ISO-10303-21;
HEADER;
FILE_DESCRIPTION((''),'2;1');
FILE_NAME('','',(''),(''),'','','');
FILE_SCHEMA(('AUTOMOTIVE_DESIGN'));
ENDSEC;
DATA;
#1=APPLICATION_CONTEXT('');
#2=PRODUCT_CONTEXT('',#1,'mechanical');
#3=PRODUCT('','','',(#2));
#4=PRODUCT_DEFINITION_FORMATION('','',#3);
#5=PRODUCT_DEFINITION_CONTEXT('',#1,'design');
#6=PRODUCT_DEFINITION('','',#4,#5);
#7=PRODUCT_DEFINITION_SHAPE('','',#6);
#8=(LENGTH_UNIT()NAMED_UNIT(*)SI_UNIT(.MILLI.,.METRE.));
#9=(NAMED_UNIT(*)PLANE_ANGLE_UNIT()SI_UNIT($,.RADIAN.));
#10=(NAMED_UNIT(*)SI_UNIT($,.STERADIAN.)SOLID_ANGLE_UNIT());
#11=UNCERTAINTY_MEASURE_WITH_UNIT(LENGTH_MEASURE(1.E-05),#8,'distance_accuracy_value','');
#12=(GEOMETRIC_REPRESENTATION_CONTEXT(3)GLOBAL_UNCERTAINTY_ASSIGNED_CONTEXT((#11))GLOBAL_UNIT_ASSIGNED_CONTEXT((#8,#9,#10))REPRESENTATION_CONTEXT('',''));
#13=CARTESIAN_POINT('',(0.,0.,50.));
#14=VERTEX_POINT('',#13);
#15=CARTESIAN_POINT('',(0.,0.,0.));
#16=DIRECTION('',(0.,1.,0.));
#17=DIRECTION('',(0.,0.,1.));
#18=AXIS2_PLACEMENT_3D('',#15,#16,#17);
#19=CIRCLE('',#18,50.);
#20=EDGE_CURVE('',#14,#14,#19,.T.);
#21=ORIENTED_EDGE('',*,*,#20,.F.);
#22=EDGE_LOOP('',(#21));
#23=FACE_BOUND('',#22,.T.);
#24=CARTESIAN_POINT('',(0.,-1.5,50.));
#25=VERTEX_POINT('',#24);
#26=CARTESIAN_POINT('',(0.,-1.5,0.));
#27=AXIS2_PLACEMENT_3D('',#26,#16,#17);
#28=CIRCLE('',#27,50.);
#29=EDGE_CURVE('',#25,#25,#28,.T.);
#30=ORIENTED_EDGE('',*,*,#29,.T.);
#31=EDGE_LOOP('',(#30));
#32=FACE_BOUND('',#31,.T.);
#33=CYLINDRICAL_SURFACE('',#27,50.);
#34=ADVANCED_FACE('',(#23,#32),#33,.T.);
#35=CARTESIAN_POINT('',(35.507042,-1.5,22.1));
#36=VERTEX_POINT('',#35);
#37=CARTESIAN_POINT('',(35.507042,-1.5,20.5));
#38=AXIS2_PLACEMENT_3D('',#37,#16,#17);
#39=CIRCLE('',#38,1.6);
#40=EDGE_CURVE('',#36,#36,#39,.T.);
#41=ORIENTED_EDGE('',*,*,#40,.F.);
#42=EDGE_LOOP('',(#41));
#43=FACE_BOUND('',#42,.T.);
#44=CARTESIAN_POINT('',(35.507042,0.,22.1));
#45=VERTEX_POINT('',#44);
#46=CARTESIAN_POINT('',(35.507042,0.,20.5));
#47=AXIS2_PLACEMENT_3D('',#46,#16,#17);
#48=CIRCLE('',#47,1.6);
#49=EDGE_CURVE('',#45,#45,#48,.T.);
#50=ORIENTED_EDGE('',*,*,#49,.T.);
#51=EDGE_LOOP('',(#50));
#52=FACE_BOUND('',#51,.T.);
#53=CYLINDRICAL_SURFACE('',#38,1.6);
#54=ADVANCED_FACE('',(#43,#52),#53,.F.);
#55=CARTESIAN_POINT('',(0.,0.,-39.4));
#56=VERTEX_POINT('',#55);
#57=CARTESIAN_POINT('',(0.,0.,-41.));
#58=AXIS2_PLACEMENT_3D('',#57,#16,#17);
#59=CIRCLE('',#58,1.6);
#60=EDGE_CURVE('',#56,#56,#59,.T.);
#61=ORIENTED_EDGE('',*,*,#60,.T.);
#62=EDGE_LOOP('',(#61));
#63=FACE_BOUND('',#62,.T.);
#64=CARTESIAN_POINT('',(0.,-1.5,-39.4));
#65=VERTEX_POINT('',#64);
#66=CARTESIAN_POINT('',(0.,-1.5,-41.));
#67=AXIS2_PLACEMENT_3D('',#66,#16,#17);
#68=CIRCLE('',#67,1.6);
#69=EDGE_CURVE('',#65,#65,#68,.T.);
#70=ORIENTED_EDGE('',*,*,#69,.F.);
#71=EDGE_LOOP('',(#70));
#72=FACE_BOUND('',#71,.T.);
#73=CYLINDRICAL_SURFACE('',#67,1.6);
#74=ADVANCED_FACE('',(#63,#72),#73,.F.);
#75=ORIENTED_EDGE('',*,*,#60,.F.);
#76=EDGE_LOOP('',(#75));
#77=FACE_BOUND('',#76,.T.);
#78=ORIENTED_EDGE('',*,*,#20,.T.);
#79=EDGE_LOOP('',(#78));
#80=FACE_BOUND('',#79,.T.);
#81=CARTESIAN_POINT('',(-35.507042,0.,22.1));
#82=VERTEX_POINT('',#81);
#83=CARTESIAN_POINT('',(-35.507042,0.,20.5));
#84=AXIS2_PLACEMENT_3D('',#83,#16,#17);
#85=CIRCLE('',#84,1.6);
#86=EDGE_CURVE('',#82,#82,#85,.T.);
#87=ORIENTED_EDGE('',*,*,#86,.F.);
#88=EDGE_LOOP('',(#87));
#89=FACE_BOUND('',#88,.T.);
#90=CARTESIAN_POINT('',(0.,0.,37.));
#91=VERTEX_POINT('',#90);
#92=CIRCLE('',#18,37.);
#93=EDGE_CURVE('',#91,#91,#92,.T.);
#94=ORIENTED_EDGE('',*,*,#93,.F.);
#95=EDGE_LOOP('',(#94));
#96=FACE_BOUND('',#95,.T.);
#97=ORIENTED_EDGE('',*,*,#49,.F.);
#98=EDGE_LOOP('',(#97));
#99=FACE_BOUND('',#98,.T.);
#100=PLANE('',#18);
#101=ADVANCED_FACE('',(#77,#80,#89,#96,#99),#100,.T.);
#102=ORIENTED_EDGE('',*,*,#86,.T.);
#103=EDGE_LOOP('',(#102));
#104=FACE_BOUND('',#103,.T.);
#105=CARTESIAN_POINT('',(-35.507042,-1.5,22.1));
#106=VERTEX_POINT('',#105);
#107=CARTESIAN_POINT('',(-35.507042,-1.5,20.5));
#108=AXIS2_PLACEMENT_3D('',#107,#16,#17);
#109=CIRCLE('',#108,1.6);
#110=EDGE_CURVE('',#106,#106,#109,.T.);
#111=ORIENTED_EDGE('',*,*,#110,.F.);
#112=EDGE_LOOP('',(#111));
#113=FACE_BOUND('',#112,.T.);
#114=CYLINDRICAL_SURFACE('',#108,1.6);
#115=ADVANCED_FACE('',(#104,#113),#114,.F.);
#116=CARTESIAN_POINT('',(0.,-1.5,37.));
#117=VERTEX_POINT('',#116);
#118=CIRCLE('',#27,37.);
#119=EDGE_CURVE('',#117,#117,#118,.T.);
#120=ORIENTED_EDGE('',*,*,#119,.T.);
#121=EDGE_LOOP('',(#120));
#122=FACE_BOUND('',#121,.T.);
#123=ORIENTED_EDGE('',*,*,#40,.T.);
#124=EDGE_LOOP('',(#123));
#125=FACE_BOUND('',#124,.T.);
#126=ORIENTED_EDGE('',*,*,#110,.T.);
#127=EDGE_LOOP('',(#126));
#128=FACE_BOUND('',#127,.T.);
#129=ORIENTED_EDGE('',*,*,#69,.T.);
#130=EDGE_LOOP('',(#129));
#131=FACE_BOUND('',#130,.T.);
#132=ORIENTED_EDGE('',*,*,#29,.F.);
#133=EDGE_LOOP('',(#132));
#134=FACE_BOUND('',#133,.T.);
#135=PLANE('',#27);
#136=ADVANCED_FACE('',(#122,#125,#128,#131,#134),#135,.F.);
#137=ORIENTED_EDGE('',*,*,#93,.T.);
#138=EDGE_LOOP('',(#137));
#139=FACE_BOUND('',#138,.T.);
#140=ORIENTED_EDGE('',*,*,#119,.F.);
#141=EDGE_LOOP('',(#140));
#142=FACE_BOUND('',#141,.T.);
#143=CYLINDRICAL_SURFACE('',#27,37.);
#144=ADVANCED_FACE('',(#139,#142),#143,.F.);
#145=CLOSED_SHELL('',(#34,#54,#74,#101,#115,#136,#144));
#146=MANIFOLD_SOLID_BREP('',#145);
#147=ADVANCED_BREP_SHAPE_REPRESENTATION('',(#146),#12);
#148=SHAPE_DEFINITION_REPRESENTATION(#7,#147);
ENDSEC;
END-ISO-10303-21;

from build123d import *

# Parameters (mm, degrees)
SKETCH1_R          = 50
SKETCH1_R_2        = 37
BASE_FLANGE1_DEPTH = 1.5
SKETCH6_R          = 1.6
CUT_EXTRUDE1_DEPTH = 71.726586232


# Sheet-metal steps are written as plain solids
with BuildPart() as part:
    # Sketch1 → Base-Flange1 (new body)
    with BuildSketch(Plane(origin=(0, 0, 0), x_dir=(1, 0, 0), z_dir=(0, 1, 0))):
        with Locations(Location((0, 0, 0), (0, 0, 270))):
            Circle(SKETCH1_R)
        with Locations(Location((0, 0, 0), (0, 0, 270))):
            Circle(SKETCH1_R_2, mode=Mode.SUBTRACT)
    extrude(amount=-BASE_FLANGE1_DEPTH)

    # Sketch6 → Cut-Extrude1 (cut, through all)
    with BuildSketch(Plane(origin=(0, 0, 0), x_dir=(1, 0, 0), z_dir=(0, 1, 0))):
        with Locations(Location((0, 41, 0), (0, 0, 270))):
            Circle(SKETCH6_R)
        with Locations(Location((35.507041555, -20.5, 0), (0, 0, 270))):
            Circle(SKETCH6_R)
        with Locations(Location((-35.507041555, -20.5, 0), (0, 0, 270))):
            Circle(SKETCH6_R)
    extrude(amount=-CUT_EXTRUDE1_DEPTH, mode=Mode.SUBTRACT)


solid = part.part
